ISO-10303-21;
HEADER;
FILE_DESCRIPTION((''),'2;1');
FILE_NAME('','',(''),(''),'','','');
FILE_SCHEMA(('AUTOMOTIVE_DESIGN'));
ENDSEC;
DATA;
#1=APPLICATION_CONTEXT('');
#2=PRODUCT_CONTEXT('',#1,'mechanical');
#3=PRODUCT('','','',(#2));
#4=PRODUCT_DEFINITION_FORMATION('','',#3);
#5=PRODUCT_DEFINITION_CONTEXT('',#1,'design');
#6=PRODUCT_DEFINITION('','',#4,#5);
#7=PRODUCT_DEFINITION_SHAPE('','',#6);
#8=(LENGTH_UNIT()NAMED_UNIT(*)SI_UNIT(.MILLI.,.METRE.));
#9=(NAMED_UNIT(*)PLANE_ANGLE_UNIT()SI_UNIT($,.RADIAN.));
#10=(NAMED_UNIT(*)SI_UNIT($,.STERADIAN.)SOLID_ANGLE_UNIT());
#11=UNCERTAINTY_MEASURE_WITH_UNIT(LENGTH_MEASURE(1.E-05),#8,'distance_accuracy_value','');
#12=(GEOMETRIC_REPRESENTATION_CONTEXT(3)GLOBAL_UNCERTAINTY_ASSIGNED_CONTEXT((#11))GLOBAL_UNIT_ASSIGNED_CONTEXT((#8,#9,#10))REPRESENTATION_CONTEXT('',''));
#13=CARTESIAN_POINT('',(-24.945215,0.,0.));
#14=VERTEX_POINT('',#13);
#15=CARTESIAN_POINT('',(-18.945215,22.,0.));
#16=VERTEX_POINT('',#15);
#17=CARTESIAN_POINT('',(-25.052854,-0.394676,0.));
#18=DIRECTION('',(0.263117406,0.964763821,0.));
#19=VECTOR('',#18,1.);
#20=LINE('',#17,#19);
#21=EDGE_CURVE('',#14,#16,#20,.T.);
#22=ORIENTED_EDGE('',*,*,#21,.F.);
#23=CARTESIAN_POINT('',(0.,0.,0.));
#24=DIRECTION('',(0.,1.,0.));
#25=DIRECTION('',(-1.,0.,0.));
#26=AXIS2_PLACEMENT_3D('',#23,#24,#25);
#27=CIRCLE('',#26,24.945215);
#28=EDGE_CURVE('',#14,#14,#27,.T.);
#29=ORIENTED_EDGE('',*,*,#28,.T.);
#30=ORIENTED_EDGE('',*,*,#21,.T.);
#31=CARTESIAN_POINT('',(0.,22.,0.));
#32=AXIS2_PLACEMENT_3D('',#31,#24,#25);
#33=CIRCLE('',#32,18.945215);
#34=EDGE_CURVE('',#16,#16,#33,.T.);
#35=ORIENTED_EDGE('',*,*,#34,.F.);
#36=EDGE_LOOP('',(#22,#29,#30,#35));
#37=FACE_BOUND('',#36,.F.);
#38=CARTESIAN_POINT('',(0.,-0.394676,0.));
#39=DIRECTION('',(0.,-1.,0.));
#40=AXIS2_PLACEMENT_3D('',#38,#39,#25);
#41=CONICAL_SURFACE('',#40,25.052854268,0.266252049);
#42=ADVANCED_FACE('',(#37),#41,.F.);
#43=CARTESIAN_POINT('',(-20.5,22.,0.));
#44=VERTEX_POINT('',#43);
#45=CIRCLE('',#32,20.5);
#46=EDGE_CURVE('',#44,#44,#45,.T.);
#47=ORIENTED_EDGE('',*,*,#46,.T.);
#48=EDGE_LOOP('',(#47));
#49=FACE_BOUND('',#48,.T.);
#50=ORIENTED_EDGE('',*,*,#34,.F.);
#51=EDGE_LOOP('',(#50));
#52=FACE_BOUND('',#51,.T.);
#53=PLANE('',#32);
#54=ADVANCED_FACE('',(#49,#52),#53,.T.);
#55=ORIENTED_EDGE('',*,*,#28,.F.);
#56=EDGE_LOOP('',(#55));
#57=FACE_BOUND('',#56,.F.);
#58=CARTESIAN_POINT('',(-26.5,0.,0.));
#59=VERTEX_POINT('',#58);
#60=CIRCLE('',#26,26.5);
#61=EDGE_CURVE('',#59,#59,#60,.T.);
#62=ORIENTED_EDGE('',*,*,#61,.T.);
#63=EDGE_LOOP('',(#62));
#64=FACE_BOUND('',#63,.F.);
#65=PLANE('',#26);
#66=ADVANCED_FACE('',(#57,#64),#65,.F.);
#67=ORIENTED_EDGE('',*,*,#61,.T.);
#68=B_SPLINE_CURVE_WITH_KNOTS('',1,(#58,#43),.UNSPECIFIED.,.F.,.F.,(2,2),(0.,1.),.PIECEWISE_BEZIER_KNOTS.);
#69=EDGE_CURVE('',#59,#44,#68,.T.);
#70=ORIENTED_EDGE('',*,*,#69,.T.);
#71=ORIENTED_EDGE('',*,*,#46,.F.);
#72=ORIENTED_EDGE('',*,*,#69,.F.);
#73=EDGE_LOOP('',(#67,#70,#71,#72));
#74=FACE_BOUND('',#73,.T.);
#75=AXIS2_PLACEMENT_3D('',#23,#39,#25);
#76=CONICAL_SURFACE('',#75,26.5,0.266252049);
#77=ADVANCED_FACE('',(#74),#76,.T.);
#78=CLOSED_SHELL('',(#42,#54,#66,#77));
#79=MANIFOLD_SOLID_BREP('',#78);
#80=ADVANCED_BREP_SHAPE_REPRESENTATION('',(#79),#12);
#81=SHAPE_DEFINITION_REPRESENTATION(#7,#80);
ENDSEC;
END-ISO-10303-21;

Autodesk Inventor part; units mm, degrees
ref_plane "YZ Plane" through (0, 0, 0) normal (1, 0, 0) x (0, 1, 0)
ref_plane "XY Plane" through (0, 0, 0) normal (0, 0, 1) x (1, 0, 0)
sketch "Szkic6" plane through (0, 0, 0) normal (0, 1, 0) x (-1, 0, 0)
  circle A0 centre (0, 0) radius 26.5
  dimension "d33" = 52
ref_plane "Płaszczyzna konstrukcyjna1" through (0, 22, 0) normal (0, 1, 0) x (-1, 0, 0)
sketch "Szkic7" plane through (0, 22, 0) normal (0, 1, 0) x (-1, 0, 0)
  circle A0 centre (0, 0) radius 20.5
  dimension "d35" = 28
loft "Wyciągnięcie złożone1" add profiles "Szkic6", "Szkic7"
shell "Skorupa1" thickness 1.5 removed faces 2 at (-3.5154, 22, 4.1371) at (-1.8199, 0, -2.5499)
equation "\"d33\" = OD1"
equation "\"d35\" = OD2"
equation "\"d52\" = THK"
equation "\"SzerokośćGięciaPodcięcia\" = Grubość"
equation "\"RozmiarPodcięciaNarożnika\" = 4 * Grubość"
equation "\"PromieńPrzejścia\" = PromieńGięcia"
equation "\"Rozmiar_promienia_Jacobiego\" = PromieńGięcia"
equation "\"Wielk_odstępu\" = Grubość"
equation "\"d2\" = PromieńGięcia"
equation "\"d23\" = PromieńGięcia"
equation "\"OD1\" = 52"
equation "\"OD2\" = 28"
equation "\"L\" = 44"
equation "\"THK\" = 1.5"
equation "\"d34\" = L"
equation "\"Grubość\" = 1.5"
equation "\"PromieńGięcia\" = 3"
properties part number "Redukcja symetryczna Ø52x28x1,5 L=44" material "304"
